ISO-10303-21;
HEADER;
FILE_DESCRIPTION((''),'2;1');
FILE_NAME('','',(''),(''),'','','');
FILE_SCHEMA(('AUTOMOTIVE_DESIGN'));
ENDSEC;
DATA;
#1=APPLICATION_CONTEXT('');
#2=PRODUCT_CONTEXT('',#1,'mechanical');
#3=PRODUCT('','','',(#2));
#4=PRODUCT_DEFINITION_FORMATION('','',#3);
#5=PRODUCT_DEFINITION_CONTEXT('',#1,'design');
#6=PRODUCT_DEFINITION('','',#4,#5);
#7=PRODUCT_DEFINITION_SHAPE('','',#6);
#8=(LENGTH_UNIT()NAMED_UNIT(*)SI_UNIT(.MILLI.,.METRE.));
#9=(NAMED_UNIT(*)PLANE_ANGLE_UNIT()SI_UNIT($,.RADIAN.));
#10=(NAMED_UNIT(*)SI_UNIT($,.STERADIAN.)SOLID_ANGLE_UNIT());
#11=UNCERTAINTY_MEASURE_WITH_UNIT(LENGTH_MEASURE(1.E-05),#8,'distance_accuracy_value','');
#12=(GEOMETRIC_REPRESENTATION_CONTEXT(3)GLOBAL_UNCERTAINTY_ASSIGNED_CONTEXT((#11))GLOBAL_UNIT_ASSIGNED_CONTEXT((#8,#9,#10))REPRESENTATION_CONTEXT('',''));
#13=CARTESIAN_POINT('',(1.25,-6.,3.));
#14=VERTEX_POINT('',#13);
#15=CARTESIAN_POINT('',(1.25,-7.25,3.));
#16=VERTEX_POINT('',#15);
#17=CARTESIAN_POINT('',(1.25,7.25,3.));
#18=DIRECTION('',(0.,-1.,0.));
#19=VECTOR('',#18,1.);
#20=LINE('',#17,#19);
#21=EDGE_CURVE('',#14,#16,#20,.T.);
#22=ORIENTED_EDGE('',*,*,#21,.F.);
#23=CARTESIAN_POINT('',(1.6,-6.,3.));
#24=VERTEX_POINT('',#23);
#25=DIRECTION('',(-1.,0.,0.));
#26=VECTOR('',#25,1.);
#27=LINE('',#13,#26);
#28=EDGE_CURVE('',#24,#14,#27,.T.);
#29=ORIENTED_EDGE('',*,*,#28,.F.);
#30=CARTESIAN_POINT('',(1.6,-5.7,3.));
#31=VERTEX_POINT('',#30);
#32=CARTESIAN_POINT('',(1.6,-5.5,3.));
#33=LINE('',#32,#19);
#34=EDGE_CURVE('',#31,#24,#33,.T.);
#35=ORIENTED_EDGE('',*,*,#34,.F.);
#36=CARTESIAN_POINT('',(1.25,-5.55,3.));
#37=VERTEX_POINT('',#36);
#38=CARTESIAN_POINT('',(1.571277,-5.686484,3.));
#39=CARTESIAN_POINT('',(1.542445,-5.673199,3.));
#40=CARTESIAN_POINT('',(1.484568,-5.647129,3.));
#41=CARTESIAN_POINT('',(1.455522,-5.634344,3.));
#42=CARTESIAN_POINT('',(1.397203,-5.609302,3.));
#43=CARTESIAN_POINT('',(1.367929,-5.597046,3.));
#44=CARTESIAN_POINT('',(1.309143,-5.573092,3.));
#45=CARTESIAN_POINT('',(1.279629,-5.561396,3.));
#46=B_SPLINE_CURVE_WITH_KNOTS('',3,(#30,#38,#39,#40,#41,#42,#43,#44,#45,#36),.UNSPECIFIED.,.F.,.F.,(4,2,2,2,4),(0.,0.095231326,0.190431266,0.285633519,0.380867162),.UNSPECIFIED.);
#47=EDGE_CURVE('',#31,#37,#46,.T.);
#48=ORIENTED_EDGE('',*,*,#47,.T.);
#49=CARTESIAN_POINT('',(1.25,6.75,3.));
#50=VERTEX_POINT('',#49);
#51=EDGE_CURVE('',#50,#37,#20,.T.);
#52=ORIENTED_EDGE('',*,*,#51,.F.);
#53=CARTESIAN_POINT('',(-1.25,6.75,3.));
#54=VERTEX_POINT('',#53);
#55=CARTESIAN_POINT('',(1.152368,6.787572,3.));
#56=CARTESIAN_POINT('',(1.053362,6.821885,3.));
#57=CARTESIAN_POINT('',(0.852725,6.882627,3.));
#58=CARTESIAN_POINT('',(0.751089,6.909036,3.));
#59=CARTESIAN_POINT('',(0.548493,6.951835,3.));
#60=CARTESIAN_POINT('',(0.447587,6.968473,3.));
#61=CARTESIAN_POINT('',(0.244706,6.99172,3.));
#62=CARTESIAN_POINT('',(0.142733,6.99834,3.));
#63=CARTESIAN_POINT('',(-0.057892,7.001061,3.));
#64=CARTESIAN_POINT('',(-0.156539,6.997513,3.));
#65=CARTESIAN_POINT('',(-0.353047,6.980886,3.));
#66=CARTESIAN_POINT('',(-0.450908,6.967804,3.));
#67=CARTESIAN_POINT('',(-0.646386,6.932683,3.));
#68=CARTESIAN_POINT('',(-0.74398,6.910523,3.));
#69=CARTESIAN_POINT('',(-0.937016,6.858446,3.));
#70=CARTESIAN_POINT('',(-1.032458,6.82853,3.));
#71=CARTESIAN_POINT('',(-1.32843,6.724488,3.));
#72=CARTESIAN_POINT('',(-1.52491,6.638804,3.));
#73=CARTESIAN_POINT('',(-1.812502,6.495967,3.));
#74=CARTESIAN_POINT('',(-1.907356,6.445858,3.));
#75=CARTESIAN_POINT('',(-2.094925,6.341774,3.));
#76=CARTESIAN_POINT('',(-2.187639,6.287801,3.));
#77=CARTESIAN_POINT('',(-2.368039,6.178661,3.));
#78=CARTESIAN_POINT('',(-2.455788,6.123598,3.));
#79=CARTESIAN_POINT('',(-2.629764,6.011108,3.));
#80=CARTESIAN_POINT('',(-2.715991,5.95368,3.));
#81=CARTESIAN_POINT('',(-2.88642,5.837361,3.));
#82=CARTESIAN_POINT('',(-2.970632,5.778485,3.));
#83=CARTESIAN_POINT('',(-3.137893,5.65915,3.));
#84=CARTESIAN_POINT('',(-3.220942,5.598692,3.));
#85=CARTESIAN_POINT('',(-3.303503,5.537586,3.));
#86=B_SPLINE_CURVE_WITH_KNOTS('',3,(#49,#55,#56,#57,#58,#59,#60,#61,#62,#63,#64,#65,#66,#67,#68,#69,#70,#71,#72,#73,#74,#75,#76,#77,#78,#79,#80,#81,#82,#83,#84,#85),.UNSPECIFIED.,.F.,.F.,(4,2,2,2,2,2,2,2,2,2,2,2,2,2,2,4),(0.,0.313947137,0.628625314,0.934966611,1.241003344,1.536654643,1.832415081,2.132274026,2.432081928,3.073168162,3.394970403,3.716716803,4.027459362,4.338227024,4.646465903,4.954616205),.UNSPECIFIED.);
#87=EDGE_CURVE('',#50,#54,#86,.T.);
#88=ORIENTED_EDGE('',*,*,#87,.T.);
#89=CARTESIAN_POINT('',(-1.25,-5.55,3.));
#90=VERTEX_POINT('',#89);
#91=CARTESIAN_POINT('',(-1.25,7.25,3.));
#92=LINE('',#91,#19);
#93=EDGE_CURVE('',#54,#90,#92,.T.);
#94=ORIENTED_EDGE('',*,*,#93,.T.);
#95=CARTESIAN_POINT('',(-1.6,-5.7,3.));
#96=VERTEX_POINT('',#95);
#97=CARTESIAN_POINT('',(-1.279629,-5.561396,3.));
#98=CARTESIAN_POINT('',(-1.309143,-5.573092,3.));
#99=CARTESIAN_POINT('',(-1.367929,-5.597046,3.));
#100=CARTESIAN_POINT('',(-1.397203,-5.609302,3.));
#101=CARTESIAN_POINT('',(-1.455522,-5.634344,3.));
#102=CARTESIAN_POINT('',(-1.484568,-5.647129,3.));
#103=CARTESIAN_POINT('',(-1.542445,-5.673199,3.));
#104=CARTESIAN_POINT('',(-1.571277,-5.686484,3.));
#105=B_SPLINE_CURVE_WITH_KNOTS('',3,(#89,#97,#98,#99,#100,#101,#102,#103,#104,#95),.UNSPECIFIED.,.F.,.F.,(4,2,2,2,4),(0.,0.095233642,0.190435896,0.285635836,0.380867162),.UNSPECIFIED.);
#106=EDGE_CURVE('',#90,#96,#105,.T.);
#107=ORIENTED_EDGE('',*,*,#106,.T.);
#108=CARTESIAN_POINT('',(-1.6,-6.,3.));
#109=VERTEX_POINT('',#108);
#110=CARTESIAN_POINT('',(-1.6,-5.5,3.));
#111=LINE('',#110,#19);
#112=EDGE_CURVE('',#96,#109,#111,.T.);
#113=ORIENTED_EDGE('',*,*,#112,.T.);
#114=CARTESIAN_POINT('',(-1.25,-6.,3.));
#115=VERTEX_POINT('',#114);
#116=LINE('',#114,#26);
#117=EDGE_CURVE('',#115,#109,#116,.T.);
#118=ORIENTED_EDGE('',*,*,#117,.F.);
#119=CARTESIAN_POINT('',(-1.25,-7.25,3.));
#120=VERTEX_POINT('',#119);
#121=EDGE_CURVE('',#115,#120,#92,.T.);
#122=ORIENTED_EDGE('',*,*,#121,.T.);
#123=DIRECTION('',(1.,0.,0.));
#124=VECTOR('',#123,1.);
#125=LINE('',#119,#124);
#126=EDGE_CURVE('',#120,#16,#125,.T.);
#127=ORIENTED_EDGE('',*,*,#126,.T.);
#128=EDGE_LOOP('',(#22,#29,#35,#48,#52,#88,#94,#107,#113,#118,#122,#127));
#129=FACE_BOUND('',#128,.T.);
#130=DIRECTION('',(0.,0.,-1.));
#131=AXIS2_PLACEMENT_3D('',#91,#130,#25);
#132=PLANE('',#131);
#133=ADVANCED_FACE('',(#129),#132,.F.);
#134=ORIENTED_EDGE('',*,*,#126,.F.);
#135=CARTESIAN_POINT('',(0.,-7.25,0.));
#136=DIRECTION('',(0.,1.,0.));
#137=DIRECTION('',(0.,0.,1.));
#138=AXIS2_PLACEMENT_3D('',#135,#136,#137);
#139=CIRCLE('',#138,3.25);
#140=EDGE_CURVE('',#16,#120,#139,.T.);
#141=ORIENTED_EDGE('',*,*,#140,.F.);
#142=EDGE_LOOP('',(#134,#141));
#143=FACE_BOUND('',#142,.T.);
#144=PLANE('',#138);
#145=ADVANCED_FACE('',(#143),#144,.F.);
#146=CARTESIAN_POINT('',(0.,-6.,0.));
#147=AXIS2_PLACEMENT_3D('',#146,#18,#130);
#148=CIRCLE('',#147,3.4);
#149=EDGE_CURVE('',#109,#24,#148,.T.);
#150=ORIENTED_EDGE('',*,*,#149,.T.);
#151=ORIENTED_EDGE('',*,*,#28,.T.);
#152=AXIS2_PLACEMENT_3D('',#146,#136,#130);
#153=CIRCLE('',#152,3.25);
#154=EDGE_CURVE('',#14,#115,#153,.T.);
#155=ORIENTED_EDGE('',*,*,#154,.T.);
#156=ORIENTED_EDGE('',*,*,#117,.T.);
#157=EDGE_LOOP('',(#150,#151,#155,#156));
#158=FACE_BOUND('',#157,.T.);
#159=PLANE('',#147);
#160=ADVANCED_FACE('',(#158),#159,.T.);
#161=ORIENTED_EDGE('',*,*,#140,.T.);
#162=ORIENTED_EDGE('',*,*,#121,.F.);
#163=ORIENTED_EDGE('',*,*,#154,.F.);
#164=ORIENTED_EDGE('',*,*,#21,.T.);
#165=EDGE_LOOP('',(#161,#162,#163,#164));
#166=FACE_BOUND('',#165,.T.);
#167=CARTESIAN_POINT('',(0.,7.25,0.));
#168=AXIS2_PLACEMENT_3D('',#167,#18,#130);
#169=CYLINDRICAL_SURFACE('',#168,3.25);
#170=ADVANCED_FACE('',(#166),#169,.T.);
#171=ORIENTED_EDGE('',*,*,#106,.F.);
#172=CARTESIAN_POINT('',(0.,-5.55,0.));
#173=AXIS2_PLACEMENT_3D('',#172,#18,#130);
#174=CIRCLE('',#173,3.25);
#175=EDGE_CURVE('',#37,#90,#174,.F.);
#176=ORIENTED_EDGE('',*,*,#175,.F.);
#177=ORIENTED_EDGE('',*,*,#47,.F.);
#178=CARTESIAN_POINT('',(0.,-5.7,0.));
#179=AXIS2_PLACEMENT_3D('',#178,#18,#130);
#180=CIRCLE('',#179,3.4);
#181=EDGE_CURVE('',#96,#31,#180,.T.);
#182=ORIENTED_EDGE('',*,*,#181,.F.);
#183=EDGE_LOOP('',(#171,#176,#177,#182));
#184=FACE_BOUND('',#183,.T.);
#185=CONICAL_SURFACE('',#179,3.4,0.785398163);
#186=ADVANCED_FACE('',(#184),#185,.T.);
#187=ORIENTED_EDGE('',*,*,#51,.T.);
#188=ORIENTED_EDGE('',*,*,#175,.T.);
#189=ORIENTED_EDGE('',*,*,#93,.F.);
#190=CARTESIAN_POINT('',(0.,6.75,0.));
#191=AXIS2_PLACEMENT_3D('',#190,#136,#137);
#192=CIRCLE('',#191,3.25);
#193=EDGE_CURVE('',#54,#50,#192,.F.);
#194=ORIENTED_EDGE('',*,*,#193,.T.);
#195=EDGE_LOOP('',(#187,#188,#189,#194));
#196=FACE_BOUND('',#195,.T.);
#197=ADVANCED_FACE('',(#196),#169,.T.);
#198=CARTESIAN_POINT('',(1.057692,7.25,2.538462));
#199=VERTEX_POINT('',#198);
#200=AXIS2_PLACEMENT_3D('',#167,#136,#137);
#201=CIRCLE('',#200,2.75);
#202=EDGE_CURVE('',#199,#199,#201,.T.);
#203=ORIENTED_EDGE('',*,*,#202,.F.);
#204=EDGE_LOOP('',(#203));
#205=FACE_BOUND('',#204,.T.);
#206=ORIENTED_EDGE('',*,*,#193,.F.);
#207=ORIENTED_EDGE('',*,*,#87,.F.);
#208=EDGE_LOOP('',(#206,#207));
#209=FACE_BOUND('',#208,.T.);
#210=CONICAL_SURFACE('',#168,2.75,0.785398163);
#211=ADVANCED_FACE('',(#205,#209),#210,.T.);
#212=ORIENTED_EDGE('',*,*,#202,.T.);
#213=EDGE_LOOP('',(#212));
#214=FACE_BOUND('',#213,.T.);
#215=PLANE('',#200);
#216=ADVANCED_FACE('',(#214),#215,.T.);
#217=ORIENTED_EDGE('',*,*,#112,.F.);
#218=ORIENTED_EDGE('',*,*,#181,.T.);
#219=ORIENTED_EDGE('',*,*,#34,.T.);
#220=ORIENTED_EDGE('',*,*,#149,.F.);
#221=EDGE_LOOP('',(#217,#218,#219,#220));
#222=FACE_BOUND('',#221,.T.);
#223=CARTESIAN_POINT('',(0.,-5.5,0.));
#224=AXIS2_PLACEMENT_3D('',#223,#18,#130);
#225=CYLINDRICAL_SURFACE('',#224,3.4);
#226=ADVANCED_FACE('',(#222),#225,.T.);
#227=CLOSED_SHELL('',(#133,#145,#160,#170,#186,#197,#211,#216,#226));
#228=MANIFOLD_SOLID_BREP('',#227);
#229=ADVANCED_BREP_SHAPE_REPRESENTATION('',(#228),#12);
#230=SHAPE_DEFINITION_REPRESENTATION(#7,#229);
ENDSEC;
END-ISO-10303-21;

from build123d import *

# Parameters (mm, degrees)
BOSS_EXTRUDE1_DEPTH = 7.25
BOSS_EXTRUDE2_START = -1.75
BOSS_EXTRUDE2_DEPTH = 0.5
CHAMFER1_SIZE       = 0.2


with BuildPart() as part:
    # Sketch1 → Boss-Extrude1 (new, symmetric)
    with BuildSketch(Plane(origin=(0, 0, 0), x_dir=(1, 0, 0), z_dir=(0, 1, 0))):
        with BuildLine():
            Line((-1.25, -3), (1.25, -3))
            ThreePointArc((1.25, -3), (0, 3.25), (-1.25, -3))
        make_face()
    extrude(amount=BOSS_EXTRUDE1_DEPTH, both=True)

    # Sketch2 → Boss-Extrude2 (add)
    with BuildSketch(Plane.XZ.offset(7.25).offset(BOSS_EXTRUDE2_START)):
        with BuildLine():
            Line((-1.25, 3), (-1.6, 3))
            ThreePointArc((-1.6, 3), (0, -3.4), (1.6, 3))
            Line((1.6, 3), (1.25, 3))
            ThreePointArc((1.25, 3), (0, -3.25), (-1.25, 3))
        make_face()
    extrude(amount=BOSS_EXTRUDE2_DEPTH)

    # Chamfer1
    # the kernel refuses this chamfer: 0.2 mm, written as the material it takes off along each edge
    with BuildSketch(Plane(origin=(0, -5.5, 0), x_dir=(-0.3315887986155938, 0, 0.9434240131736458), z_dir=(0.9434240131736458, 0, 0.3315887986155938))) as chamfer1_piece_1_section:
        Polygon((3.4, CHAMFER1_SIZE), (3.4 - CHAMFER1_SIZE, 0), (3.4, 0), align=None)
    chamfer1_piece_1 = revolve(axis=Axis((0, -5.5, 0), (0, -1, 0)), revolution_arc=321.269525005, mode=Mode.PRIVATE)
    chamfer1_piece_1 = chamfer1_piece_1 - Plane(origin=(0, -5.5, 0), x_dir=(0.38461538461538497, 0, 0.923076923076923), z_dir=(0, 1, 0)) * Cylinder(3.25, 14, mode=Mode.PRIVATE)
    add(chamfer1_piece_1, mode=Mode.SUBTRACT)

    # Chamfer2: read off the stored shape, not the designer's step
    # Chamfer2 outline → Chamfer2 (revolve, cut)
    with BuildSketch(Plane.XY):
        Polygon((3.25, 7.25), (2.75, 7.25), (3.25, 6.75), align=None)
    revolve(axis=Axis((0, 0, 0), (0, 1, 0)), mode=Mode.SUBTRACT)


solid = part.part
